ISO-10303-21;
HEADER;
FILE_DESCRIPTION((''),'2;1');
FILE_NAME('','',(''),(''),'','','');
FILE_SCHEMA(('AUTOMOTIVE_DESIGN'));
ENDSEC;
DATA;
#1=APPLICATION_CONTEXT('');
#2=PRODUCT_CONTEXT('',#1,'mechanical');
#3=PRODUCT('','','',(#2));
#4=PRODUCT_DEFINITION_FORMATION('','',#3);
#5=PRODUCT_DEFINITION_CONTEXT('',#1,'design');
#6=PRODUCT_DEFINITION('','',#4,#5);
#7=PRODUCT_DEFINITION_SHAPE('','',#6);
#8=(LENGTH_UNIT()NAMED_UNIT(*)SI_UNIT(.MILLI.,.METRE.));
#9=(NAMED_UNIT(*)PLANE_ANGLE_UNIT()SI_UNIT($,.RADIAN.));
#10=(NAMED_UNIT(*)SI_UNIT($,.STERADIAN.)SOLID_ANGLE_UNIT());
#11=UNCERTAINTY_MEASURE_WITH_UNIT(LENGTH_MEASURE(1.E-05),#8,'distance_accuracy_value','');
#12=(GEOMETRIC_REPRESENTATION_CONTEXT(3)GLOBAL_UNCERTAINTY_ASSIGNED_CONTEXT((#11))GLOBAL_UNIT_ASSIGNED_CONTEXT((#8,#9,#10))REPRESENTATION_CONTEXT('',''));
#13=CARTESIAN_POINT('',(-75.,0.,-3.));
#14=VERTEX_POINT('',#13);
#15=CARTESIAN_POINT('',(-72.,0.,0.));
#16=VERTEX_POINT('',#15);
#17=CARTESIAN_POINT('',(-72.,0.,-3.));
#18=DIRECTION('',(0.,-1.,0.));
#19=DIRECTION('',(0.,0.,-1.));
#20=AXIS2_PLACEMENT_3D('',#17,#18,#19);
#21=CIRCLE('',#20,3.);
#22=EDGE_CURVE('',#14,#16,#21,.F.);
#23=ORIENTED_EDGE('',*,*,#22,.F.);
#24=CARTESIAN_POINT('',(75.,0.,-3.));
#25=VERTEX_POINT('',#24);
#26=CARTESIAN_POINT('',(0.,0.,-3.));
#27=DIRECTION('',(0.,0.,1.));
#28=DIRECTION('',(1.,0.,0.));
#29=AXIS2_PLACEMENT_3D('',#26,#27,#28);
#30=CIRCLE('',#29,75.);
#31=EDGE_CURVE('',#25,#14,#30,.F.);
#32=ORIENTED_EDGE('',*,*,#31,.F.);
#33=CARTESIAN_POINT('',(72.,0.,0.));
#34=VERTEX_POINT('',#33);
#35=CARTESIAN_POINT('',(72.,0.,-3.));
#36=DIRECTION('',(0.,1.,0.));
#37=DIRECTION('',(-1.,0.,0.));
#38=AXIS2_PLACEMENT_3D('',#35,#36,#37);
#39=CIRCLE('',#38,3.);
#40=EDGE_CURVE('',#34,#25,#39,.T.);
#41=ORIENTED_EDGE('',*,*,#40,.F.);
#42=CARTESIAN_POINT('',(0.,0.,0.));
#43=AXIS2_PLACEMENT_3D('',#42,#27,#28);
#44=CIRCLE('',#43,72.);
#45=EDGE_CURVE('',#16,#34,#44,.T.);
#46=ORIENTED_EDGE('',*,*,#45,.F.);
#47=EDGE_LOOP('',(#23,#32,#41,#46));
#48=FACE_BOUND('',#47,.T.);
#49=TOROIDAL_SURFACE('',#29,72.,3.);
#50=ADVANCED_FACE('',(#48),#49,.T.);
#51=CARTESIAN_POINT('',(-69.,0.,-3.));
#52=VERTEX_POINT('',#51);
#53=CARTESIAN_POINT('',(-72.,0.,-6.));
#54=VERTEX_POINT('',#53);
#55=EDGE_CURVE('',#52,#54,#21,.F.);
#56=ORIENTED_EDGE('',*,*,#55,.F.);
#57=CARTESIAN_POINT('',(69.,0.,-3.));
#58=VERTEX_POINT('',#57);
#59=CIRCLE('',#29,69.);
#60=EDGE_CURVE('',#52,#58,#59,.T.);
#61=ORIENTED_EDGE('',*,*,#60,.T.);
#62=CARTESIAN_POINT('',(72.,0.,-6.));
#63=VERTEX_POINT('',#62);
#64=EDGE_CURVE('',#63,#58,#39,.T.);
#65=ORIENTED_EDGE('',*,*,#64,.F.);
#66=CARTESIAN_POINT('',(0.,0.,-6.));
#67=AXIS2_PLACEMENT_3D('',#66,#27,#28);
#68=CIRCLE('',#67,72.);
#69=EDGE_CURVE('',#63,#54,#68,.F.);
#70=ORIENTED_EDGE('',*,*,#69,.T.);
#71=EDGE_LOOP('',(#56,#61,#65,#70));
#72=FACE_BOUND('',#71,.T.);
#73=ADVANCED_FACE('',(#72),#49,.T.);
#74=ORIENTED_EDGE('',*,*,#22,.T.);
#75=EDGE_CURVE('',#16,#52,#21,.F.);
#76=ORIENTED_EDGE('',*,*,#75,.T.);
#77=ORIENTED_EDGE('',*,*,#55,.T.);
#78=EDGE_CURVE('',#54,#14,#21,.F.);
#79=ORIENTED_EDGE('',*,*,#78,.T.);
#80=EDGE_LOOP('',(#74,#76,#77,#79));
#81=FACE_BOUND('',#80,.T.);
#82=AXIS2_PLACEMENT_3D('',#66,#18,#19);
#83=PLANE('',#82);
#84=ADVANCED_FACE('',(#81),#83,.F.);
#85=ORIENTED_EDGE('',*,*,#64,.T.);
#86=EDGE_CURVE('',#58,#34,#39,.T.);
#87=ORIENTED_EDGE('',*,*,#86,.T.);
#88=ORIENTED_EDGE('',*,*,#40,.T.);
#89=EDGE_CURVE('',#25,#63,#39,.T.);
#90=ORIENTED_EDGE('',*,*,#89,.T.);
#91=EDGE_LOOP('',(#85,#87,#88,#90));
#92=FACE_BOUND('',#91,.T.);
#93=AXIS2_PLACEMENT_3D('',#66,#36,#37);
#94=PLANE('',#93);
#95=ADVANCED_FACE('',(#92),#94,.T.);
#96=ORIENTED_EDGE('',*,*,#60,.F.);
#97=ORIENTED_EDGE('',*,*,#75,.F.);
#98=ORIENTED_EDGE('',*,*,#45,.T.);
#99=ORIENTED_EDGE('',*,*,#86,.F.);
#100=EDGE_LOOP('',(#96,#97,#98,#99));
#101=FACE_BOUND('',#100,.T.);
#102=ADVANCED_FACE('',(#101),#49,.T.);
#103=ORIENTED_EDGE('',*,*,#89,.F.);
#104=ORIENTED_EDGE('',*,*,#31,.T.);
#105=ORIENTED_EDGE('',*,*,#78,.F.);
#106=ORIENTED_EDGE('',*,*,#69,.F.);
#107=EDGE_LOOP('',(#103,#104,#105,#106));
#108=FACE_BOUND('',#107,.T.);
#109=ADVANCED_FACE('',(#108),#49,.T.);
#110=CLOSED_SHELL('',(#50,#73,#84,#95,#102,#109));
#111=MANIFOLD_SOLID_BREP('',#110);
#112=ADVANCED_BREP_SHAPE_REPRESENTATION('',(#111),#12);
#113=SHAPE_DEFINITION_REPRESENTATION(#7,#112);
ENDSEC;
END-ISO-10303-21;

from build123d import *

# Parameters (mm, degrees)
BOSS_EXTRUDE2_DEPTH = 6
FILLET1_R           = 3


with BuildPart() as part:
    # Sketch1 → Boss-Extrude2 (new body)
    with BuildSketch(Plane.XY):
        with BuildLine():
            Line((-75, 0), (-69, 0))
            ThreePointArc((-69, 0), (0, -69), (69, 0))
            Line((69, 0), (75, 0))
            ThreePointArc((75, 0), (0, -75), (-75, 0))
        make_face()
    extrude(amount=-BOSS_EXTRUDE2_DEPTH)

    # Fillet1
    fillet1_edges = [part.edges().sort_by_distance(p)[0] for p in [
        (0, -69, -6),
        (0, -69, 0),
        (0, -75, -6),
        (0, -75, 0),
    ]]
    fillet(fillet1_edges, radius=FILLET1_R - 0.0001)  # a hair under: the kernel refuses the full size


solid = part.part
